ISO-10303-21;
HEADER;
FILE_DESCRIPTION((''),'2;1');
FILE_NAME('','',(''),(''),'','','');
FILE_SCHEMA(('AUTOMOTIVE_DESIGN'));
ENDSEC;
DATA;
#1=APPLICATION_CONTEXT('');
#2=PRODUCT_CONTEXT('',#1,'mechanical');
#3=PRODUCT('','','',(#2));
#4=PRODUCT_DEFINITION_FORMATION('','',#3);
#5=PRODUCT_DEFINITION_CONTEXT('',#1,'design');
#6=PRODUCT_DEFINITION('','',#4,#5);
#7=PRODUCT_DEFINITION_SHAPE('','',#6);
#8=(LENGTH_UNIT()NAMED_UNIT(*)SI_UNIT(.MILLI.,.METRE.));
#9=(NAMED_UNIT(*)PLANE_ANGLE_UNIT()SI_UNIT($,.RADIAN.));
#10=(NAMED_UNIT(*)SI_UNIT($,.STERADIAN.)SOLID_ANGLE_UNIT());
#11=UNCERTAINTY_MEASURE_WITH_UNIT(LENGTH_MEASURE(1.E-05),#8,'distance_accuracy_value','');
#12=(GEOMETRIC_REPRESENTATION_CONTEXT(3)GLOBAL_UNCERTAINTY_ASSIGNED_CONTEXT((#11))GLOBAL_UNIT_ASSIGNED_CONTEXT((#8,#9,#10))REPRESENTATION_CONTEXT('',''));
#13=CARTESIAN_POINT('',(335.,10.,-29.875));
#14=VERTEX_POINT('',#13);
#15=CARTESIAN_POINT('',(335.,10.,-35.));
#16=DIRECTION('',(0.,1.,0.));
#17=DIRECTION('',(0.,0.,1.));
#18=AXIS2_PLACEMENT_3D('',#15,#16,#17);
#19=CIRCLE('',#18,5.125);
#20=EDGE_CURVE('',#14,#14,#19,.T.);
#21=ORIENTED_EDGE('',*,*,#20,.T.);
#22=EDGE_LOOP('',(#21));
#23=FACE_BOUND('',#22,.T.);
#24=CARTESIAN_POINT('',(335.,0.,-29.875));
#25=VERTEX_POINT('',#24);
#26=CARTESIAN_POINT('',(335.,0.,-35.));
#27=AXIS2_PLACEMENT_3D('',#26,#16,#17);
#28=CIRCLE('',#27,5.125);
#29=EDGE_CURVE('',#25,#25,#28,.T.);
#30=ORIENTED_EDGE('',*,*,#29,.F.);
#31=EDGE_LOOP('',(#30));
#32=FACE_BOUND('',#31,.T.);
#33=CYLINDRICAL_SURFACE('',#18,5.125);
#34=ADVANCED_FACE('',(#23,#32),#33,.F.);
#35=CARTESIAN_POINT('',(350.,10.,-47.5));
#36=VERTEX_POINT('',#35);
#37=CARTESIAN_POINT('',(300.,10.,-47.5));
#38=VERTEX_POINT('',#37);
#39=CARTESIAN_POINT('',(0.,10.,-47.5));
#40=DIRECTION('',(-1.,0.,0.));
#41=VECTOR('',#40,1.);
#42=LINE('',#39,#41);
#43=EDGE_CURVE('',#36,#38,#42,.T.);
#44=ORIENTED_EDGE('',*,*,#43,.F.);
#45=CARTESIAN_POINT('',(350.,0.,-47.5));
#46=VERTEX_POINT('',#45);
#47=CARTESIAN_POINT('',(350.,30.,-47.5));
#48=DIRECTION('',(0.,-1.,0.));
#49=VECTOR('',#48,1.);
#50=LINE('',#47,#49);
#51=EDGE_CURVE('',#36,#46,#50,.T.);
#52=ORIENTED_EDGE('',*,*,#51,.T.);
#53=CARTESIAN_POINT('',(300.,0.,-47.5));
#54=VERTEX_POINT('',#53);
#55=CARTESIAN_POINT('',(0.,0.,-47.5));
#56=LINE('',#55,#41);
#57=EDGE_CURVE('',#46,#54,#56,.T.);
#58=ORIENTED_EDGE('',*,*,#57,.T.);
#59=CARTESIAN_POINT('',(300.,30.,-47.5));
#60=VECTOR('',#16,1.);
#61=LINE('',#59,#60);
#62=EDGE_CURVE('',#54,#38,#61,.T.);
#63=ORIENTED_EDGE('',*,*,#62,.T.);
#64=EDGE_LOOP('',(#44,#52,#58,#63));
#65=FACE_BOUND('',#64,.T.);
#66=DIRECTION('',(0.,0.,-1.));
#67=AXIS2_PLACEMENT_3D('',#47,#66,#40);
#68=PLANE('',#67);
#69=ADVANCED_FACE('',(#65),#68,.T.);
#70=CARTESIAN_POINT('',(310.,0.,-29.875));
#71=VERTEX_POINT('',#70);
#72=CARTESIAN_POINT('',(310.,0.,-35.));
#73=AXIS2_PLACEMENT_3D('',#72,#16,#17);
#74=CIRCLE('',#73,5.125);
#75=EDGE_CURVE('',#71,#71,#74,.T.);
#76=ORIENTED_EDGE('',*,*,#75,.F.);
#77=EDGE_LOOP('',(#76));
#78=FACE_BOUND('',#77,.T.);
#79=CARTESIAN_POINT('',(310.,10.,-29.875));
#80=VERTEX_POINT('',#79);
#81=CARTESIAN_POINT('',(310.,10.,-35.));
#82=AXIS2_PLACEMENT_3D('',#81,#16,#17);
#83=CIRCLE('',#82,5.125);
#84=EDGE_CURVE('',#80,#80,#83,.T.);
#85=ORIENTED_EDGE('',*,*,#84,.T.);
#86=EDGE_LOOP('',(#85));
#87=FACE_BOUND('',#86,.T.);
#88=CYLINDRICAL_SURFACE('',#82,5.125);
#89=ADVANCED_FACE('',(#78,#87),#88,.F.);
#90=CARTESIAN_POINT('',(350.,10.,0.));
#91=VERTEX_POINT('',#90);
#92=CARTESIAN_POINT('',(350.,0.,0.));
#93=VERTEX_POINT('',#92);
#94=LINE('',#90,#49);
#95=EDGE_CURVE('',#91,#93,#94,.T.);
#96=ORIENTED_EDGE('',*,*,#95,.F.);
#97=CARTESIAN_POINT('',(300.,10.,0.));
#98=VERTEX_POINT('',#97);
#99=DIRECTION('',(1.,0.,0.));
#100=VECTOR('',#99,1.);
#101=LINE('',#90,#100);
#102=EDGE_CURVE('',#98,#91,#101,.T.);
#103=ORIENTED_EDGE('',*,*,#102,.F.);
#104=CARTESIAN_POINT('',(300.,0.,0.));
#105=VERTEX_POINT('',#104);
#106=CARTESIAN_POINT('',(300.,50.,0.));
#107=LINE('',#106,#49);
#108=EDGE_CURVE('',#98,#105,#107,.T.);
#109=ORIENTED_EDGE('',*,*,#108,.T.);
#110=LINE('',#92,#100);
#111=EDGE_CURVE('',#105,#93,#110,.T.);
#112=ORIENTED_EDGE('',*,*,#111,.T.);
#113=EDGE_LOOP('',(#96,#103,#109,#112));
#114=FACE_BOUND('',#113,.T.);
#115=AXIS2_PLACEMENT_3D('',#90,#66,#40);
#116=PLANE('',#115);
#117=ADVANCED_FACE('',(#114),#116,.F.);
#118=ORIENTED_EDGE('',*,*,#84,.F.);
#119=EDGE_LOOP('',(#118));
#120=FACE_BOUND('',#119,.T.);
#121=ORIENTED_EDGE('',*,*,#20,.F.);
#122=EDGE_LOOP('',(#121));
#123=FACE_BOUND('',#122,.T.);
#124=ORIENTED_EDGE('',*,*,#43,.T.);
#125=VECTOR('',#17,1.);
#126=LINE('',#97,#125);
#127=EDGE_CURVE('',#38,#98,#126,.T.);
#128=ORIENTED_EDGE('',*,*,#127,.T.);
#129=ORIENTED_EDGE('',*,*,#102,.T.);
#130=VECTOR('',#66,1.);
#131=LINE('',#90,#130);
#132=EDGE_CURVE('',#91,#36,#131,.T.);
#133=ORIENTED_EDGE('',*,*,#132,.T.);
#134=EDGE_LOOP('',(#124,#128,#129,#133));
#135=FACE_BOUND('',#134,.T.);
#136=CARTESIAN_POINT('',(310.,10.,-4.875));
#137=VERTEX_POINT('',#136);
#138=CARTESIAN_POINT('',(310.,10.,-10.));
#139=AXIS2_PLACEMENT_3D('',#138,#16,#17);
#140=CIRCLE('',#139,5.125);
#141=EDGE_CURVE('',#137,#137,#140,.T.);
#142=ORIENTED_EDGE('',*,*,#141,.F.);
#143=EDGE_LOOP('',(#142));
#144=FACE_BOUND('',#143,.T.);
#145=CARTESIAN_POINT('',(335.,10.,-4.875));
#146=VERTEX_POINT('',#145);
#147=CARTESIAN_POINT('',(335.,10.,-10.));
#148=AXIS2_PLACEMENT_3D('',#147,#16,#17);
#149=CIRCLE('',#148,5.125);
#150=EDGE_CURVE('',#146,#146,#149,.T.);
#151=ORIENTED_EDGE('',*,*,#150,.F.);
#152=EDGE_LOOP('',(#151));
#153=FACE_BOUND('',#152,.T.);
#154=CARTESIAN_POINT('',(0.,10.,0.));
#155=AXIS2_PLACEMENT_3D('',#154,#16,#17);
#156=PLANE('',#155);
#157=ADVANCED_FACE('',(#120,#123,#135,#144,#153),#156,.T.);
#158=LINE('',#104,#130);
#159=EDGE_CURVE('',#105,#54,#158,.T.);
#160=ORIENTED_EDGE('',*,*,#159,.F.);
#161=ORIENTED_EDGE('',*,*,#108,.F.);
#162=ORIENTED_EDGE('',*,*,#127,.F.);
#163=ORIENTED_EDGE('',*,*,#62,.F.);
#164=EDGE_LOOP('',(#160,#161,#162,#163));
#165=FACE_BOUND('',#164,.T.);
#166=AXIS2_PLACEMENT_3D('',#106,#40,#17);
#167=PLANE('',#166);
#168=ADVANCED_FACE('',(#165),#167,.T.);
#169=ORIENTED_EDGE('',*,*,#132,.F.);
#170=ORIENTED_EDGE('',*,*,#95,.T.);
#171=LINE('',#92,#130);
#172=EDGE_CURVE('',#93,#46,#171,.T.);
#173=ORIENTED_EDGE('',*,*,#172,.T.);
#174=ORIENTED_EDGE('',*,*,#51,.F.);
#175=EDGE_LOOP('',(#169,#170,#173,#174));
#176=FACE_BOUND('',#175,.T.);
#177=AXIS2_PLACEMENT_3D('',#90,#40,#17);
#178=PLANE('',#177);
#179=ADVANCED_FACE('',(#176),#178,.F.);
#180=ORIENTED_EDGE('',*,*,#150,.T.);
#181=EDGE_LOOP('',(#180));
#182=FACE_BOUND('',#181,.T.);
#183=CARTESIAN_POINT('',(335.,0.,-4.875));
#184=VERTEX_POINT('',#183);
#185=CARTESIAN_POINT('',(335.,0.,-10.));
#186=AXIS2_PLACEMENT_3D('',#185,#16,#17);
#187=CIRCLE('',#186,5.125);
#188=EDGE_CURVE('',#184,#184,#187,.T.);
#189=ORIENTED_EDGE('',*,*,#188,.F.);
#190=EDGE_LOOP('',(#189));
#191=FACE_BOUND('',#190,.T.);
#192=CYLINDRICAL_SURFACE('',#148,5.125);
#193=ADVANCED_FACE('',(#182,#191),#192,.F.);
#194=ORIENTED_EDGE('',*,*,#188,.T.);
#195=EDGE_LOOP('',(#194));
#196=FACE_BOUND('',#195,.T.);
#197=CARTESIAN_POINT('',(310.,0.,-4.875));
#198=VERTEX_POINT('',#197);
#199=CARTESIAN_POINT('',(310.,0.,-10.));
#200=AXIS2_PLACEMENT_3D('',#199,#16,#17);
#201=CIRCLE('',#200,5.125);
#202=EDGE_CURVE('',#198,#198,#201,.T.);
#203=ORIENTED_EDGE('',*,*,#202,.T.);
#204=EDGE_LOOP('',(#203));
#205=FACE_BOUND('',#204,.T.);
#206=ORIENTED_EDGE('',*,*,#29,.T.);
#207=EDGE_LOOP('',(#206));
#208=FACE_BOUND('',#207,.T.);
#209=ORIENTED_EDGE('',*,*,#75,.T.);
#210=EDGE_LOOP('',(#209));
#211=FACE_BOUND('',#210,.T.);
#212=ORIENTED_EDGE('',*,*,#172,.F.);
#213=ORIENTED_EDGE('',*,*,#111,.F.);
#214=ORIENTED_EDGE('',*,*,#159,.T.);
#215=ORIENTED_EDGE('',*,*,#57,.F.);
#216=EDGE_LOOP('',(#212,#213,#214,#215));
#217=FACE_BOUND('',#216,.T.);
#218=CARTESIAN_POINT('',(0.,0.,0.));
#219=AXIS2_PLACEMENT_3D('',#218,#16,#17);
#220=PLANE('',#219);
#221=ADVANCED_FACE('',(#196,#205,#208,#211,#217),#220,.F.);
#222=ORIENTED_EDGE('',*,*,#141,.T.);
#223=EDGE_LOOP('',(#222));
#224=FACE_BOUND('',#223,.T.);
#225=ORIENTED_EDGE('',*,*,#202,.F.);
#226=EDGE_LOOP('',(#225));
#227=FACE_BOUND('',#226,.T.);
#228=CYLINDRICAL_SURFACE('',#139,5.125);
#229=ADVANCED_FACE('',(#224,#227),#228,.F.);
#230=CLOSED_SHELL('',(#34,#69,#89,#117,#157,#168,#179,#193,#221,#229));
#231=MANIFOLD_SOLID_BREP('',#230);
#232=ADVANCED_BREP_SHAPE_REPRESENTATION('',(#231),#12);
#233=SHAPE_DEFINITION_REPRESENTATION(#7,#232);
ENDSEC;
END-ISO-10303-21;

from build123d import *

# Parameters (mm, degrees)
SKETCH2_W               = 350
SKETCH2_H               = 350
BOSS_EXTRUDE2_DEPTH     = 10
ADVANCEDHOLE1_OUTLINE_R = 5.125
ADVANCEDHOLE1_DEPTH     = 10
CUT_EXTRUDE4_DEPTH      = 50
CUT_EXTRUDE5_DEPTH      = 50


# Read off the part's stored shape, not the designer's step: AdvancedHole1
with BuildPart() as part:
    # Sketch2 → Boss-Extrude2 (new body)
    with BuildSketch(Plane(origin=(0, 0, 0), x_dir=(1, 0, 0), z_dir=(0, 1, 0))):
        with Locations((175, 175)):
            Rectangle(SKETCH2_W, SKETCH2_H)
    extrude(amount=BOSS_EXTRUDE2_DEPTH)

    # AdvancedHole1 outline → AdvancedHole1 (cut)
    with BuildSketch(Plane(origin=(0, 0, 0), x_dir=(1, 0, 0), z_dir=(0, 1, 0))):
        with Locations((10, 310)):
            Circle(ADVANCEDHOLE1_OUTLINE_R)
        with Locations((10, 335)):
            Circle(ADVANCEDHOLE1_OUTLINE_R)
        with Locations((35, 335)):
            Circle(ADVANCEDHOLE1_OUTLINE_R)
        with Locations((35, 310)):
            Circle(ADVANCEDHOLE1_OUTLINE_R)
        with Locations((60, 335)):
            Circle(ADVANCEDHOLE1_OUTLINE_R)
        with Locations((85, 335)):
            Circle(ADVANCEDHOLE1_OUTLINE_R)
        with Locations((60, 310)):
            Circle(ADVANCEDHOLE1_OUTLINE_R)
        with Locations((85, 310)):
            Circle(ADVANCEDHOLE1_OUTLINE_R)
        with Locations((10, 285)):
            Circle(ADVANCEDHOLE1_OUTLINE_R)
        with Locations((35, 285)):
            Circle(ADVANCEDHOLE1_OUTLINE_R)
        with Locations((60, 285)):
            Circle(ADVANCEDHOLE1_OUTLINE_R)
        with Locations((85, 285)):
            Circle(ADVANCEDHOLE1_OUTLINE_R)
        with Locations((10, 260)):
            Circle(ADVANCEDHOLE1_OUTLINE_R)
        with Locations((35, 260)):
            Circle(ADVANCEDHOLE1_OUTLINE_R)
        with Locations((60, 260)):
            Circle(ADVANCEDHOLE1_OUTLINE_R)
        with Locations((85, 260)):
            Circle(ADVANCEDHOLE1_OUTLINE_R)
        with Locations((110, 285)):
            Circle(ADVANCEDHOLE1_OUTLINE_R)
        with Locations((110, 310)):
            Circle(ADVANCEDHOLE1_OUTLINE_R)
        with Locations((110, 335)):
            Circle(ADVANCEDHOLE1_OUTLINE_R)
        with Locations((135, 285)):
            Circle(ADVANCEDHOLE1_OUTLINE_R)
        with Locations((135, 310)):
            Circle(ADVANCEDHOLE1_OUTLINE_R)
        with Locations((135, 335)):
            Circle(ADVANCEDHOLE1_OUTLINE_R)
        with Locations((160, 335)):
            Circle(ADVANCEDHOLE1_OUTLINE_R)
        with Locations((160, 310)):
            Circle(ADVANCEDHOLE1_OUTLINE_R)
        with Locations((110, 260)):
            Circle(ADVANCEDHOLE1_OUTLINE_R)
        with Locations((135, 260)):
            Circle(ADVANCEDHOLE1_OUTLINE_R)
        with Locations((160, 285)):
            Circle(ADVANCEDHOLE1_OUTLINE_R)
        with Locations((160, 260)):
            Circle(ADVANCEDHOLE1_OUTLINE_R)
        with Locations((185, 335)):
            Circle(ADVANCEDHOLE1_OUTLINE_R)
        with Locations((185, 310)):
            Circle(ADVANCEDHOLE1_OUTLINE_R)
        with Locations((185, 285)):
            Circle(ADVANCEDHOLE1_OUTLINE_R)
        with Locations((185, 260)):
            Circle(ADVANCEDHOLE1_OUTLINE_R)
        with Locations((210, 310)):
            Circle(ADVANCEDHOLE1_OUTLINE_R)
        with Locations((210, 335)):
            Circle(ADVANCEDHOLE1_OUTLINE_R)
        with Locations((235, 310)):
            Circle(ADVANCEDHOLE1_OUTLINE_R)
        with Locations((235, 335)):
            Circle(ADVANCEDHOLE1_OUTLINE_R)
        with Locations((260, 310)):
            Circle(ADVANCEDHOLE1_OUTLINE_R)
        with Locations((285, 310)):
            Circle(ADVANCEDHOLE1_OUTLINE_R)
        with Locations((260, 335)):
            Circle(ADVANCEDHOLE1_OUTLINE_R)
        with Locations((285, 335)):
            Circle(ADVANCEDHOLE1_OUTLINE_R)
        with Locations((310, 335)):
            Circle(ADVANCEDHOLE1_OUTLINE_R)
        with Locations((335, 335)):
            Circle(ADVANCEDHOLE1_OUTLINE_R)
        with Locations((310, 310)):
            Circle(ADVANCEDHOLE1_OUTLINE_R)
        with Locations((335, 310)):
            Circle(ADVANCEDHOLE1_OUTLINE_R)
        with Locations((210, 285)):
            Circle(ADVANCEDHOLE1_OUTLINE_R)
        with Locations((235, 285)):
            Circle(ADVANCEDHOLE1_OUTLINE_R)
        with Locations((260, 285)):
            Circle(ADVANCEDHOLE1_OUTLINE_R)
        with Locations((285, 285)):
            Circle(ADVANCEDHOLE1_OUTLINE_R)
        with Locations((310, 285)):
            Circle(ADVANCEDHOLE1_OUTLINE_R)
        with Locations((335, 285)):
            Circle(ADVANCEDHOLE1_OUTLINE_R)
        with Locations((210, 260)):
            Circle(ADVANCEDHOLE1_OUTLINE_R)
        with Locations((235, 260)):
            Circle(ADVANCEDHOLE1_OUTLINE_R)
        with Locations((260, 260)):
            Circle(ADVANCEDHOLE1_OUTLINE_R)
        with Locations((285, 260)):
            Circle(ADVANCEDHOLE1_OUTLINE_R)
        with Locations((310, 260)):
            Circle(ADVANCEDHOLE1_OUTLINE_R)
        with Locations((335, 260)):
            Circle(ADVANCEDHOLE1_OUTLINE_R)
        with Locations((10, 235)):
            Circle(ADVANCEDHOLE1_OUTLINE_R)
        with Locations((35, 235)):
            Circle(ADVANCEDHOLE1_OUTLINE_R)
        with Locations((60, 235)):
            Circle(ADVANCEDHOLE1_OUTLINE_R)
        with Locations((85, 235)):
            Circle(ADVANCEDHOLE1_OUTLINE_R)
        with Locations((110, 235)):
            Circle(ADVANCEDHOLE1_OUTLINE_R)
        with Locations((135, 235)):
            Circle(ADVANCEDHOLE1_OUTLINE_R)
        with Locations((160, 235)):
            Circle(ADVANCEDHOLE1_OUTLINE_R)
        with Locations((185, 235)):
            Circle(ADVANCEDHOLE1_OUTLINE_R)
        with Locations((210, 235)):
            Circle(ADVANCEDHOLE1_OUTLINE_R)
        with Locations((235, 235)):
            Circle(ADVANCEDHOLE1_OUTLINE_R)
        with Locations((260, 235)):
            Circle(ADVANCEDHOLE1_OUTLINE_R)
        with Locations((285, 235)):
            Circle(ADVANCEDHOLE1_OUTLINE_R)
        with Locations((310, 235)):
            Circle(ADVANCEDHOLE1_OUTLINE_R)
        with Locations((335, 235)):
            Circle(ADVANCEDHOLE1_OUTLINE_R)
        with Locations((10, 210)):
            Circle(ADVANCEDHOLE1_OUTLINE_R)
        with Locations((35, 210)):
            Circle(ADVANCEDHOLE1_OUTLINE_R)
        with Locations((60, 210)):
            Circle(ADVANCEDHOLE1_OUTLINE_R)
        with Locations((85, 210)):
            Circle(ADVANCEDHOLE1_OUTLINE_R)
        with Locations((110, 210)):
            Circle(ADVANCEDHOLE1_OUTLINE_R)
        with Locations((135, 210)):
            Circle(ADVANCEDHOLE1_OUTLINE_R)
        with Locations((160, 210)):
            Circle(ADVANCEDHOLE1_OUTLINE_R)
        with Locations((185, 210)):
            Circle(ADVANCEDHOLE1_OUTLINE_R)
        with Locations((210, 210)):
            Circle(ADVANCEDHOLE1_OUTLINE_R)
        with Locations((235, 210)):
            Circle(ADVANCEDHOLE1_OUTLINE_R)
        with Locations((260, 210)):
            Circle(ADVANCEDHOLE1_OUTLINE_R)
        with Locations((285, 210)):
            Circle(ADVANCEDHOLE1_OUTLINE_R)
        with Locations((310, 210)):
            Circle(ADVANCEDHOLE1_OUTLINE_R)
        with Locations((335, 210)):
            Circle(ADVANCEDHOLE1_OUTLINE_R)
        with Locations((10, 185)):
            Circle(ADVANCEDHOLE1_OUTLINE_R)
        with Locations((35, 185)):
            Circle(ADVANCEDHOLE1_OUTLINE_R)
        with Locations((60, 185)):
            Circle(ADVANCEDHOLE1_OUTLINE_R)
        with Locations((85, 185)):
            Circle(ADVANCEDHOLE1_OUTLINE_R)
        with Locations((110, 185)):
            Circle(ADVANCEDHOLE1_OUTLINE_R)
        with Locations((135, 185)):
            Circle(ADVANCEDHOLE1_OUTLINE_R)
        with Locations((160, 185)):
            Circle(ADVANCEDHOLE1_OUTLINE_R)
        with Locations((185, 185)):
            Circle(ADVANCEDHOLE1_OUTLINE_R)
        with Locations((210, 185)):
            Circle(ADVANCEDHOLE1_OUTLINE_R)
        with Locations((235, 185)):
            Circle(ADVANCEDHOLE1_OUTLINE_R)
        with Locations((260, 185)):
            Circle(ADVANCEDHOLE1_OUTLINE_R)
        with Locations((285, 185)):
            Circle(ADVANCEDHOLE1_OUTLINE_R)
        with Locations((310, 185)):
            Circle(ADVANCEDHOLE1_OUTLINE_R)
        with Locations((335, 185)):
            Circle(ADVANCEDHOLE1_OUTLINE_R)
        with Locations((10, 160)):
            Circle(ADVANCEDHOLE1_OUTLINE_R)
        with Locations((35, 160)):
            Circle(ADVANCEDHOLE1_OUTLINE_R)
        with Locations((60, 160)):
            Circle(ADVANCEDHOLE1_OUTLINE_R)
        with Locations((85, 160)):
            Circle(ADVANCEDHOLE1_OUTLINE_R)
        with Locations((110, 160)):
            Circle(ADVANCEDHOLE1_OUTLINE_R)
        with Locations((135, 160)):
            Circle(ADVANCEDHOLE1_OUTLINE_R)
        with Locations((160, 160)):
            Circle(ADVANCEDHOLE1_OUTLINE_R)
        with Locations((185, 160)):
            Circle(ADVANCEDHOLE1_OUTLINE_R)
        with Locations((210, 160)):
            Circle(ADVANCEDHOLE1_OUTLINE_R)
        with Locations((235, 160)):
            Circle(ADVANCEDHOLE1_OUTLINE_R)
        with Locations((260, 160)):
            Circle(ADVANCEDHOLE1_OUTLINE_R)
        with Locations((285, 160)):
            Circle(ADVANCEDHOLE1_OUTLINE_R)
        with Locations((310, 160)):
            Circle(ADVANCEDHOLE1_OUTLINE_R)
        with Locations((335, 160)):
            Circle(ADVANCEDHOLE1_OUTLINE_R)
        with Locations((10, 135)):
            Circle(ADVANCEDHOLE1_OUTLINE_R)
        with Locations((35, 135)):
            Circle(ADVANCEDHOLE1_OUTLINE_R)
        with Locations((60, 135)):
            Circle(ADVANCEDHOLE1_OUTLINE_R)
        with Locations((85, 135)):
            Circle(ADVANCEDHOLE1_OUTLINE_R)
        with Locations((110, 135)):
            Circle(ADVANCEDHOLE1_OUTLINE_R)
        with Locations((135, 135)):
            Circle(ADVANCEDHOLE1_OUTLINE_R)
        with Locations((160, 135)):
            Circle(ADVANCEDHOLE1_OUTLINE_R)
        with Locations((185, 135)):
            Circle(ADVANCEDHOLE1_OUTLINE_R)
        with Locations((210, 135)):
            Circle(ADVANCEDHOLE1_OUTLINE_R)
        with Locations((235, 135)):
            Circle(ADVANCEDHOLE1_OUTLINE_R)
        with Locations((260, 135)):
            Circle(ADVANCEDHOLE1_OUTLINE_R)
        with Locations((285, 135)):
            Circle(ADVANCEDHOLE1_OUTLINE_R)
        with Locations((310, 135)):
            Circle(ADVANCEDHOLE1_OUTLINE_R)
        with Locations((335, 135)):
            Circle(ADVANCEDHOLE1_OUTLINE_R)
        with Locations((10, 110)):
            Circle(ADVANCEDHOLE1_OUTLINE_R)
        with Locations((35, 110)):
            Circle(ADVANCEDHOLE1_OUTLINE_R)
        with Locations((60, 110)):
            Circle(ADVANCEDHOLE1_OUTLINE_R)
        with Locations((85, 110)):
            Circle(ADVANCEDHOLE1_OUTLINE_R)
        with Locations((110, 110)):
            Circle(ADVANCEDHOLE1_OUTLINE_R)
        with Locations((135, 110)):
            Circle(ADVANCEDHOLE1_OUTLINE_R)
        with Locations((160, 110)):
            Circle(ADVANCEDHOLE1_OUTLINE_R)
        with Locations((185, 110)):
            Circle(ADVANCEDHOLE1_OUTLINE_R)
        with Locations((210, 110)):
            Circle(ADVANCEDHOLE1_OUTLINE_R)
        with Locations((235, 110)):
            Circle(ADVANCEDHOLE1_OUTLINE_R)
        with Locations((260, 110)):
            Circle(ADVANCEDHOLE1_OUTLINE_R)
        with Locations((285, 110)):
            Circle(ADVANCEDHOLE1_OUTLINE_R)
        with Locations((310, 110)):
            Circle(ADVANCEDHOLE1_OUTLINE_R)
        with Locations((335, 110)):
            Circle(ADVANCEDHOLE1_OUTLINE_R)
        with Locations((10, 85)):
            Circle(ADVANCEDHOLE1_OUTLINE_R)
        with Locations((35, 85)):
            Circle(ADVANCEDHOLE1_OUTLINE_R)
        with Locations((60, 85)):
            Circle(ADVANCEDHOLE1_OUTLINE_R)
        with Locations((85, 85)):
            Circle(ADVANCEDHOLE1_OUTLINE_R)
        with Locations((110, 85)):
            Circle(ADVANCEDHOLE1_OUTLINE_R)
        with Locations((135, 85)):
            Circle(ADVANCEDHOLE1_OUTLINE_R)
        with Locations((160, 85)):
            Circle(ADVANCEDHOLE1_OUTLINE_R)
        with Locations((185, 85)):
            Circle(ADVANCEDHOLE1_OUTLINE_R)
        with Locations((210, 85)):
            Circle(ADVANCEDHOLE1_OUTLINE_R)
        with Locations((235, 85)):
            Circle(ADVANCEDHOLE1_OUTLINE_R)
        with Locations((260, 85)):
            Circle(ADVANCEDHOLE1_OUTLINE_R)
        with Locations((285, 85)):
            Circle(ADVANCEDHOLE1_OUTLINE_R)
        with Locations((310, 85)):
            Circle(ADVANCEDHOLE1_OUTLINE_R)
        with Locations((335, 85)):
            Circle(ADVANCEDHOLE1_OUTLINE_R)
        with Locations((335, 60)):
            Circle(ADVANCEDHOLE1_OUTLINE_R)
        with Locations((310, 60)):
            Circle(ADVANCEDHOLE1_OUTLINE_R)
        with Locations((285, 60)):
            Circle(ADVANCEDHOLE1_OUTLINE_R)
        with Locations((260, 60)):
            Circle(ADVANCEDHOLE1_OUTLINE_R)
        with Locations((235, 60)):
            Circle(ADVANCEDHOLE1_OUTLINE_R)
        with Locations((210, 60)):
            Circle(ADVANCEDHOLE1_OUTLINE_R)
        with Locations((185, 60)):
            Circle(ADVANCEDHOLE1_OUTLINE_R)
        with Locations((160, 60)):
            Circle(ADVANCEDHOLE1_OUTLINE_R)
        with Locations((135, 60)):
            Circle(ADVANCEDHOLE1_OUTLINE_R)
        with Locations((110, 60)):
            Circle(ADVANCEDHOLE1_OUTLINE_R)
        with Locations((85, 60)):
            Circle(ADVANCEDHOLE1_OUTLINE_R)
        with Locations((60, 60)):
            Circle(ADVANCEDHOLE1_OUTLINE_R)
        with Locations((35, 60)):
            Circle(ADVANCEDHOLE1_OUTLINE_R)
        with Locations((10, 60)):
            Circle(ADVANCEDHOLE1_OUTLINE_R)
        with Locations((10, 35)):
            Circle(ADVANCEDHOLE1_OUTLINE_R)
        with Locations((35, 35)):
            Circle(ADVANCEDHOLE1_OUTLINE_R)
        with Locations((60, 35)):
            Circle(ADVANCEDHOLE1_OUTLINE_R)
        with Locations((85, 35)):
            Circle(ADVANCEDHOLE1_OUTLINE_R)
        with Locations((110, 35)):
            Circle(ADVANCEDHOLE1_OUTLINE_R)
        with Locations((135, 35)):
            Circle(ADVANCEDHOLE1_OUTLINE_R)
        with Locations((160, 35)):
            Circle(ADVANCEDHOLE1_OUTLINE_R)
        with Locations((185, 35)):
            Circle(ADVANCEDHOLE1_OUTLINE_R)
        with Locations((210, 35)):
            Circle(ADVANCEDHOLE1_OUTLINE_R)
        with Locations((235, 35)):
            Circle(ADVANCEDHOLE1_OUTLINE_R)
        with Locations((260, 35)):
            Circle(ADVANCEDHOLE1_OUTLINE_R)
        with Locations((285, 35)):
            Circle(ADVANCEDHOLE1_OUTLINE_R)
        with Locations((310, 35)):
            Circle(ADVANCEDHOLE1_OUTLINE_R)
        with Locations((335, 35)):
            Circle(ADVANCEDHOLE1_OUTLINE_R)
        with Locations((10, 10)):
            Circle(ADVANCEDHOLE1_OUTLINE_R)
        with Locations((35, 10)):
            Circle(ADVANCEDHOLE1_OUTLINE_R)
        with Locations((60, 10)):
            Circle(ADVANCEDHOLE1_OUTLINE_R)
        with Locations((85, 10)):
            Circle(ADVANCEDHOLE1_OUTLINE_R)
        with Locations((110, 10)):
            Circle(ADVANCEDHOLE1_OUTLINE_R)
        with Locations((135, 10)):
            Circle(ADVANCEDHOLE1_OUTLINE_R)
        with Locations((160, 10)):
            Circle(ADVANCEDHOLE1_OUTLINE_R)
        with Locations((185, 10)):
            Circle(ADVANCEDHOLE1_OUTLINE_R)
        with Locations((210, 10)):
            Circle(ADVANCEDHOLE1_OUTLINE_R)
        with Locations((235, 10)):
            Circle(ADVANCEDHOLE1_OUTLINE_R)
        with Locations((260, 10)):
            Circle(ADVANCEDHOLE1_OUTLINE_R)
        with Locations((285, 10)):
            Circle(ADVANCEDHOLE1_OUTLINE_R)
        with Locations((310, 10)):
            Circle(ADVANCEDHOLE1_OUTLINE_R)
        with Locations((335, 10)):
            Circle(ADVANCEDHOLE1_OUTLINE_R)
    extrude(amount=ADVANCEDHOLE1_DEPTH, mode=Mode.SUBTRACT)

    # 3DSketch14 → Cut-Extrude4 (cut)
    with BuildSketch(Plane(origin=(350, 30, -47.5), x_dir=(-0.7565799289349062, 0, -0.6539012242937402), z_dir=(0, 1, 0))):
        Polygon((0, 0), (264.802975127, 228.865428503), (462.608095476, 0), (197.805120349, -228.865428503), align=None)
    extrude(amount=-CUT_EXTRUDE4_DEPTH, mode=Mode.SUBTRACT)

    # 3DSketch15 → Cut-Extrude5 (cut)
    with BuildSketch(Plane(origin=(300, 50, 0), x_dir=(-0.9876961386749972, 1.8714675105968527e-13, -0.15638522195687465), z_dir=(0, -1, 0))):
        Polygon((0, 0), (296.308841602, -46.915566587), (303.737139645, 0), (7.428298043, 46.915566587), align=None)
    extrude(amount=CUT_EXTRUDE5_DEPTH, mode=Mode.SUBTRACT)


solid = part.part
